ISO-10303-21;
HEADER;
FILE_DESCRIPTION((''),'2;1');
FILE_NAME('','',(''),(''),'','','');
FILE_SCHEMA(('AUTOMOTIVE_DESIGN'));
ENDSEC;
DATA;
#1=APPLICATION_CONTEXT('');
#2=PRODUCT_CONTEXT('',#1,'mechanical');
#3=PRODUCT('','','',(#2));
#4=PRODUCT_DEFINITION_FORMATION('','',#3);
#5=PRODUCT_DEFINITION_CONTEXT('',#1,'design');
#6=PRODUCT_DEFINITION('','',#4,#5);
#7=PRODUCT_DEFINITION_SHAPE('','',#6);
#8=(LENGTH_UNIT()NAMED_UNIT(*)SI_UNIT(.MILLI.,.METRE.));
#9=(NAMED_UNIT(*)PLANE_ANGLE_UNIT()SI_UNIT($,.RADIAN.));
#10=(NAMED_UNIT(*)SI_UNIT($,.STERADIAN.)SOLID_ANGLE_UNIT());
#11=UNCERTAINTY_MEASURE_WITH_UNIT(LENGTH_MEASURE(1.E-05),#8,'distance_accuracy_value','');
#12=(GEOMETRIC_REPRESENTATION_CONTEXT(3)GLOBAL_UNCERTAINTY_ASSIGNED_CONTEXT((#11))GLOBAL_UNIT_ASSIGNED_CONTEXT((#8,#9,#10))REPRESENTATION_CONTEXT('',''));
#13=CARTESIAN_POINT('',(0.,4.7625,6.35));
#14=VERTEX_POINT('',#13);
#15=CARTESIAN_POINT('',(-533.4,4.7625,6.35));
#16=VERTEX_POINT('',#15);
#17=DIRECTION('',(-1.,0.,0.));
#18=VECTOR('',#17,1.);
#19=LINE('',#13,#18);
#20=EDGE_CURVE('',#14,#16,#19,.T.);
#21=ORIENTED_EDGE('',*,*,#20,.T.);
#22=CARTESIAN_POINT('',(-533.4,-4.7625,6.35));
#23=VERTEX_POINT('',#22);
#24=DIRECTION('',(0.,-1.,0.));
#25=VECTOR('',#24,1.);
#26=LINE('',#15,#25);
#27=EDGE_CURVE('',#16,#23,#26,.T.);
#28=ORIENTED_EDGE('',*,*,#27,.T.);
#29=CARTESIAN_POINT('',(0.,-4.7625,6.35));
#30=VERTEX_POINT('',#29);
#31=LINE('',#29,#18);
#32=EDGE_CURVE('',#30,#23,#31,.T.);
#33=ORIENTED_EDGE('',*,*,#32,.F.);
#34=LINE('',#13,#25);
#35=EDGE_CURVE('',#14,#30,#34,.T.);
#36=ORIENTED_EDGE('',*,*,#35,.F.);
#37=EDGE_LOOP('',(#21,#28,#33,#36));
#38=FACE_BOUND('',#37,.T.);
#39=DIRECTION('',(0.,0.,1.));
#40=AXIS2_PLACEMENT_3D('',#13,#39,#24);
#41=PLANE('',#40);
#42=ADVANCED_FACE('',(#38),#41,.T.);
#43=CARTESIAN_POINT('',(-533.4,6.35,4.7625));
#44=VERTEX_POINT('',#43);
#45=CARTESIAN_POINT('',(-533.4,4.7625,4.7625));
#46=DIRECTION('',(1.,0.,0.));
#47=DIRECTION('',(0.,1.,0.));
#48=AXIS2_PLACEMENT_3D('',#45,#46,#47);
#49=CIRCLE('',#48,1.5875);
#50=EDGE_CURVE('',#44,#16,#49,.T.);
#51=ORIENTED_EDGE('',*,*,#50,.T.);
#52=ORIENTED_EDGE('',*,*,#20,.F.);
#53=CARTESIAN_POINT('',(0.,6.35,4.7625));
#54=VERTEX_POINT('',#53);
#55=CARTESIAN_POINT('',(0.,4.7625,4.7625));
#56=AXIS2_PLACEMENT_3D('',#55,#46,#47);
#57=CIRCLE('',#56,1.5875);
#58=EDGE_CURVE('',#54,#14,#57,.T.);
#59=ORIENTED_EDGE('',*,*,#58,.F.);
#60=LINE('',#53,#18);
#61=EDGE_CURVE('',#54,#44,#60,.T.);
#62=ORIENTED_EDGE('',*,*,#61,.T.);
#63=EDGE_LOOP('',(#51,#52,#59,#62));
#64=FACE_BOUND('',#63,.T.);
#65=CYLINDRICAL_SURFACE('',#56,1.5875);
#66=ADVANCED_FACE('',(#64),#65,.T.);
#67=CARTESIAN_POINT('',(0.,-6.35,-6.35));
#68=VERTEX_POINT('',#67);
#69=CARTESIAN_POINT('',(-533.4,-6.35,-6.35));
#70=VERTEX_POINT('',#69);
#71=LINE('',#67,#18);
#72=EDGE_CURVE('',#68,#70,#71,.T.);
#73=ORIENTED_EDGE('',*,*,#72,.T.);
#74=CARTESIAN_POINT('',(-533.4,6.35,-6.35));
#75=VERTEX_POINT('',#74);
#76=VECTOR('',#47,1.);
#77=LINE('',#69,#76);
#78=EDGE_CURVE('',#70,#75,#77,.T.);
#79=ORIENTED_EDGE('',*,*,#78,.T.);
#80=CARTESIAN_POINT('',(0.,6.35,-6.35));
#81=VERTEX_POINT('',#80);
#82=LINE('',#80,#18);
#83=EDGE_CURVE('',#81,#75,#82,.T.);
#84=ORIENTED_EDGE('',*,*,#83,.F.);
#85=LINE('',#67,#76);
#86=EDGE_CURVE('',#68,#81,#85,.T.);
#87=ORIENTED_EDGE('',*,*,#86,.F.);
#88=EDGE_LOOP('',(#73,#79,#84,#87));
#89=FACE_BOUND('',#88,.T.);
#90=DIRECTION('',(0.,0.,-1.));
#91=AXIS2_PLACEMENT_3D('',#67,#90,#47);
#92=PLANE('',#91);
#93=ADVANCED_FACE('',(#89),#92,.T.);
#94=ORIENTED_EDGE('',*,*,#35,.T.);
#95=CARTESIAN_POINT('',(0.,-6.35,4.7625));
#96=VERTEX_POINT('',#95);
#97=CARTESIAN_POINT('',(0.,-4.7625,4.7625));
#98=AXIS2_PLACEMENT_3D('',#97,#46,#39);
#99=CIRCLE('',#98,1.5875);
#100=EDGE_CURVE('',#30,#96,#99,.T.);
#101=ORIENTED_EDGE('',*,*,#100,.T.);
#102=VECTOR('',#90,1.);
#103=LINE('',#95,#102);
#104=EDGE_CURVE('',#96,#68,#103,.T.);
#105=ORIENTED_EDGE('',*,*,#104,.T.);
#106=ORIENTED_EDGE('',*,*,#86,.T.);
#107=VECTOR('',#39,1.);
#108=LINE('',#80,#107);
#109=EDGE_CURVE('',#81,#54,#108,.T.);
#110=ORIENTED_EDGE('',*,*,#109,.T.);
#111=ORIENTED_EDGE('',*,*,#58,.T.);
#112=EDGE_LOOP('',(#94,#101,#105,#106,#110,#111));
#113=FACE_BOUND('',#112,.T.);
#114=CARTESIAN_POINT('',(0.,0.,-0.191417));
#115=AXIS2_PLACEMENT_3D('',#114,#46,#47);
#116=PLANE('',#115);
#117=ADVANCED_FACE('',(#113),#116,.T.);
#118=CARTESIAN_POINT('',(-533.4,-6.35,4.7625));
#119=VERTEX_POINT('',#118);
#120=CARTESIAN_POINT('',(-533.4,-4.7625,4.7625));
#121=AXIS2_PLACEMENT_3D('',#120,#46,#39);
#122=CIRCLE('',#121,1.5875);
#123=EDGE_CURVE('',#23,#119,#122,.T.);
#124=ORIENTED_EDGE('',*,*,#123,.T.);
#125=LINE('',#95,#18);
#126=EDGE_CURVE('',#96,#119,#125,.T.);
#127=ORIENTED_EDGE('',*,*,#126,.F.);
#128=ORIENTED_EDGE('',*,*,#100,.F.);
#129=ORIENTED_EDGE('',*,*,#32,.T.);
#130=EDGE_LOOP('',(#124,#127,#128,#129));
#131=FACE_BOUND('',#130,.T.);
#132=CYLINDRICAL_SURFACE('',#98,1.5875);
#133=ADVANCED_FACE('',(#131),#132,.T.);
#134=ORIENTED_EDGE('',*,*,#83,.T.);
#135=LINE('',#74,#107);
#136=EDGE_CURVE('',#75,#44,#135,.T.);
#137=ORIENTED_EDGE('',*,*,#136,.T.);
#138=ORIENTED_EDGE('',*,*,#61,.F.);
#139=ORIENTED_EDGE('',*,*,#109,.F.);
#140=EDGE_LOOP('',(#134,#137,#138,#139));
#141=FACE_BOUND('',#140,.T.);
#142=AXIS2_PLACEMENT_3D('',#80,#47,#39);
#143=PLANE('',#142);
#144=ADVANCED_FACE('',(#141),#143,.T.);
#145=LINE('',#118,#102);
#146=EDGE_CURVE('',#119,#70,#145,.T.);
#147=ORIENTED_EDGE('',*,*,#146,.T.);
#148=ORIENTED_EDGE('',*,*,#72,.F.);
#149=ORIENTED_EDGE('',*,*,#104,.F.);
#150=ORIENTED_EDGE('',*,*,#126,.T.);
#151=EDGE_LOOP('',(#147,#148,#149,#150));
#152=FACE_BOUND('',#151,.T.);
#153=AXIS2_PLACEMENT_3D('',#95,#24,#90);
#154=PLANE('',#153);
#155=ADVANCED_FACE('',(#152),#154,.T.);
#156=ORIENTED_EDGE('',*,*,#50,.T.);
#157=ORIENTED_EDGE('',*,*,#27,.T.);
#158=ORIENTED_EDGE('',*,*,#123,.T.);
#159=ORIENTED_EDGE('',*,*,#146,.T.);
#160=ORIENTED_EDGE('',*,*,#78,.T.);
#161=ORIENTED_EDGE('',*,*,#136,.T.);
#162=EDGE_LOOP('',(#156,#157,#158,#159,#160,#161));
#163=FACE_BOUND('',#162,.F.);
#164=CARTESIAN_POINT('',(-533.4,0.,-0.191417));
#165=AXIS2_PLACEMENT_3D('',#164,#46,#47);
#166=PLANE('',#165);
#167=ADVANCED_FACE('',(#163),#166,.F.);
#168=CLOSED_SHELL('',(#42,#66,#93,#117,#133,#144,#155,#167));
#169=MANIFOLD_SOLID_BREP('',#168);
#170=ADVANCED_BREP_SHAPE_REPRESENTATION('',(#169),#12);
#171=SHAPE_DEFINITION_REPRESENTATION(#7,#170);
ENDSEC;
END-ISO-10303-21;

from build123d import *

# Parameters (mm, degrees)
F2_DEPTH = 533.4


# Not quite as in the source:
# - a variable given as a bare number and used for a length is read in inches; the dataset says mm whatever the document's units were


with BuildPart() as f2:
    # F1 (on Right) → F2 (new body)
    with BuildSketch(Plane.YZ):
        with BuildLine():
            Line((-6.35, -6.35), (6.35, -6.35))
            Line((6.35, -6.35), (6.35, 4.7625))
            ThreePointArc((6.35, 4.7625), (5.8850320151, 5.8850320151), (4.7625, 6.35))
            Line((4.7625, 6.35), (-4.7625, 6.35))
            ThreePointArc((-4.7625, 6.35), (-5.8850320151, 5.8850320151), (-6.35, 4.7625))
            Line((-6.35, 4.7625), (-6.35, -6.35))
        make_face()
    extrude(amount=-F2_DEPTH)


solid = f2.part
